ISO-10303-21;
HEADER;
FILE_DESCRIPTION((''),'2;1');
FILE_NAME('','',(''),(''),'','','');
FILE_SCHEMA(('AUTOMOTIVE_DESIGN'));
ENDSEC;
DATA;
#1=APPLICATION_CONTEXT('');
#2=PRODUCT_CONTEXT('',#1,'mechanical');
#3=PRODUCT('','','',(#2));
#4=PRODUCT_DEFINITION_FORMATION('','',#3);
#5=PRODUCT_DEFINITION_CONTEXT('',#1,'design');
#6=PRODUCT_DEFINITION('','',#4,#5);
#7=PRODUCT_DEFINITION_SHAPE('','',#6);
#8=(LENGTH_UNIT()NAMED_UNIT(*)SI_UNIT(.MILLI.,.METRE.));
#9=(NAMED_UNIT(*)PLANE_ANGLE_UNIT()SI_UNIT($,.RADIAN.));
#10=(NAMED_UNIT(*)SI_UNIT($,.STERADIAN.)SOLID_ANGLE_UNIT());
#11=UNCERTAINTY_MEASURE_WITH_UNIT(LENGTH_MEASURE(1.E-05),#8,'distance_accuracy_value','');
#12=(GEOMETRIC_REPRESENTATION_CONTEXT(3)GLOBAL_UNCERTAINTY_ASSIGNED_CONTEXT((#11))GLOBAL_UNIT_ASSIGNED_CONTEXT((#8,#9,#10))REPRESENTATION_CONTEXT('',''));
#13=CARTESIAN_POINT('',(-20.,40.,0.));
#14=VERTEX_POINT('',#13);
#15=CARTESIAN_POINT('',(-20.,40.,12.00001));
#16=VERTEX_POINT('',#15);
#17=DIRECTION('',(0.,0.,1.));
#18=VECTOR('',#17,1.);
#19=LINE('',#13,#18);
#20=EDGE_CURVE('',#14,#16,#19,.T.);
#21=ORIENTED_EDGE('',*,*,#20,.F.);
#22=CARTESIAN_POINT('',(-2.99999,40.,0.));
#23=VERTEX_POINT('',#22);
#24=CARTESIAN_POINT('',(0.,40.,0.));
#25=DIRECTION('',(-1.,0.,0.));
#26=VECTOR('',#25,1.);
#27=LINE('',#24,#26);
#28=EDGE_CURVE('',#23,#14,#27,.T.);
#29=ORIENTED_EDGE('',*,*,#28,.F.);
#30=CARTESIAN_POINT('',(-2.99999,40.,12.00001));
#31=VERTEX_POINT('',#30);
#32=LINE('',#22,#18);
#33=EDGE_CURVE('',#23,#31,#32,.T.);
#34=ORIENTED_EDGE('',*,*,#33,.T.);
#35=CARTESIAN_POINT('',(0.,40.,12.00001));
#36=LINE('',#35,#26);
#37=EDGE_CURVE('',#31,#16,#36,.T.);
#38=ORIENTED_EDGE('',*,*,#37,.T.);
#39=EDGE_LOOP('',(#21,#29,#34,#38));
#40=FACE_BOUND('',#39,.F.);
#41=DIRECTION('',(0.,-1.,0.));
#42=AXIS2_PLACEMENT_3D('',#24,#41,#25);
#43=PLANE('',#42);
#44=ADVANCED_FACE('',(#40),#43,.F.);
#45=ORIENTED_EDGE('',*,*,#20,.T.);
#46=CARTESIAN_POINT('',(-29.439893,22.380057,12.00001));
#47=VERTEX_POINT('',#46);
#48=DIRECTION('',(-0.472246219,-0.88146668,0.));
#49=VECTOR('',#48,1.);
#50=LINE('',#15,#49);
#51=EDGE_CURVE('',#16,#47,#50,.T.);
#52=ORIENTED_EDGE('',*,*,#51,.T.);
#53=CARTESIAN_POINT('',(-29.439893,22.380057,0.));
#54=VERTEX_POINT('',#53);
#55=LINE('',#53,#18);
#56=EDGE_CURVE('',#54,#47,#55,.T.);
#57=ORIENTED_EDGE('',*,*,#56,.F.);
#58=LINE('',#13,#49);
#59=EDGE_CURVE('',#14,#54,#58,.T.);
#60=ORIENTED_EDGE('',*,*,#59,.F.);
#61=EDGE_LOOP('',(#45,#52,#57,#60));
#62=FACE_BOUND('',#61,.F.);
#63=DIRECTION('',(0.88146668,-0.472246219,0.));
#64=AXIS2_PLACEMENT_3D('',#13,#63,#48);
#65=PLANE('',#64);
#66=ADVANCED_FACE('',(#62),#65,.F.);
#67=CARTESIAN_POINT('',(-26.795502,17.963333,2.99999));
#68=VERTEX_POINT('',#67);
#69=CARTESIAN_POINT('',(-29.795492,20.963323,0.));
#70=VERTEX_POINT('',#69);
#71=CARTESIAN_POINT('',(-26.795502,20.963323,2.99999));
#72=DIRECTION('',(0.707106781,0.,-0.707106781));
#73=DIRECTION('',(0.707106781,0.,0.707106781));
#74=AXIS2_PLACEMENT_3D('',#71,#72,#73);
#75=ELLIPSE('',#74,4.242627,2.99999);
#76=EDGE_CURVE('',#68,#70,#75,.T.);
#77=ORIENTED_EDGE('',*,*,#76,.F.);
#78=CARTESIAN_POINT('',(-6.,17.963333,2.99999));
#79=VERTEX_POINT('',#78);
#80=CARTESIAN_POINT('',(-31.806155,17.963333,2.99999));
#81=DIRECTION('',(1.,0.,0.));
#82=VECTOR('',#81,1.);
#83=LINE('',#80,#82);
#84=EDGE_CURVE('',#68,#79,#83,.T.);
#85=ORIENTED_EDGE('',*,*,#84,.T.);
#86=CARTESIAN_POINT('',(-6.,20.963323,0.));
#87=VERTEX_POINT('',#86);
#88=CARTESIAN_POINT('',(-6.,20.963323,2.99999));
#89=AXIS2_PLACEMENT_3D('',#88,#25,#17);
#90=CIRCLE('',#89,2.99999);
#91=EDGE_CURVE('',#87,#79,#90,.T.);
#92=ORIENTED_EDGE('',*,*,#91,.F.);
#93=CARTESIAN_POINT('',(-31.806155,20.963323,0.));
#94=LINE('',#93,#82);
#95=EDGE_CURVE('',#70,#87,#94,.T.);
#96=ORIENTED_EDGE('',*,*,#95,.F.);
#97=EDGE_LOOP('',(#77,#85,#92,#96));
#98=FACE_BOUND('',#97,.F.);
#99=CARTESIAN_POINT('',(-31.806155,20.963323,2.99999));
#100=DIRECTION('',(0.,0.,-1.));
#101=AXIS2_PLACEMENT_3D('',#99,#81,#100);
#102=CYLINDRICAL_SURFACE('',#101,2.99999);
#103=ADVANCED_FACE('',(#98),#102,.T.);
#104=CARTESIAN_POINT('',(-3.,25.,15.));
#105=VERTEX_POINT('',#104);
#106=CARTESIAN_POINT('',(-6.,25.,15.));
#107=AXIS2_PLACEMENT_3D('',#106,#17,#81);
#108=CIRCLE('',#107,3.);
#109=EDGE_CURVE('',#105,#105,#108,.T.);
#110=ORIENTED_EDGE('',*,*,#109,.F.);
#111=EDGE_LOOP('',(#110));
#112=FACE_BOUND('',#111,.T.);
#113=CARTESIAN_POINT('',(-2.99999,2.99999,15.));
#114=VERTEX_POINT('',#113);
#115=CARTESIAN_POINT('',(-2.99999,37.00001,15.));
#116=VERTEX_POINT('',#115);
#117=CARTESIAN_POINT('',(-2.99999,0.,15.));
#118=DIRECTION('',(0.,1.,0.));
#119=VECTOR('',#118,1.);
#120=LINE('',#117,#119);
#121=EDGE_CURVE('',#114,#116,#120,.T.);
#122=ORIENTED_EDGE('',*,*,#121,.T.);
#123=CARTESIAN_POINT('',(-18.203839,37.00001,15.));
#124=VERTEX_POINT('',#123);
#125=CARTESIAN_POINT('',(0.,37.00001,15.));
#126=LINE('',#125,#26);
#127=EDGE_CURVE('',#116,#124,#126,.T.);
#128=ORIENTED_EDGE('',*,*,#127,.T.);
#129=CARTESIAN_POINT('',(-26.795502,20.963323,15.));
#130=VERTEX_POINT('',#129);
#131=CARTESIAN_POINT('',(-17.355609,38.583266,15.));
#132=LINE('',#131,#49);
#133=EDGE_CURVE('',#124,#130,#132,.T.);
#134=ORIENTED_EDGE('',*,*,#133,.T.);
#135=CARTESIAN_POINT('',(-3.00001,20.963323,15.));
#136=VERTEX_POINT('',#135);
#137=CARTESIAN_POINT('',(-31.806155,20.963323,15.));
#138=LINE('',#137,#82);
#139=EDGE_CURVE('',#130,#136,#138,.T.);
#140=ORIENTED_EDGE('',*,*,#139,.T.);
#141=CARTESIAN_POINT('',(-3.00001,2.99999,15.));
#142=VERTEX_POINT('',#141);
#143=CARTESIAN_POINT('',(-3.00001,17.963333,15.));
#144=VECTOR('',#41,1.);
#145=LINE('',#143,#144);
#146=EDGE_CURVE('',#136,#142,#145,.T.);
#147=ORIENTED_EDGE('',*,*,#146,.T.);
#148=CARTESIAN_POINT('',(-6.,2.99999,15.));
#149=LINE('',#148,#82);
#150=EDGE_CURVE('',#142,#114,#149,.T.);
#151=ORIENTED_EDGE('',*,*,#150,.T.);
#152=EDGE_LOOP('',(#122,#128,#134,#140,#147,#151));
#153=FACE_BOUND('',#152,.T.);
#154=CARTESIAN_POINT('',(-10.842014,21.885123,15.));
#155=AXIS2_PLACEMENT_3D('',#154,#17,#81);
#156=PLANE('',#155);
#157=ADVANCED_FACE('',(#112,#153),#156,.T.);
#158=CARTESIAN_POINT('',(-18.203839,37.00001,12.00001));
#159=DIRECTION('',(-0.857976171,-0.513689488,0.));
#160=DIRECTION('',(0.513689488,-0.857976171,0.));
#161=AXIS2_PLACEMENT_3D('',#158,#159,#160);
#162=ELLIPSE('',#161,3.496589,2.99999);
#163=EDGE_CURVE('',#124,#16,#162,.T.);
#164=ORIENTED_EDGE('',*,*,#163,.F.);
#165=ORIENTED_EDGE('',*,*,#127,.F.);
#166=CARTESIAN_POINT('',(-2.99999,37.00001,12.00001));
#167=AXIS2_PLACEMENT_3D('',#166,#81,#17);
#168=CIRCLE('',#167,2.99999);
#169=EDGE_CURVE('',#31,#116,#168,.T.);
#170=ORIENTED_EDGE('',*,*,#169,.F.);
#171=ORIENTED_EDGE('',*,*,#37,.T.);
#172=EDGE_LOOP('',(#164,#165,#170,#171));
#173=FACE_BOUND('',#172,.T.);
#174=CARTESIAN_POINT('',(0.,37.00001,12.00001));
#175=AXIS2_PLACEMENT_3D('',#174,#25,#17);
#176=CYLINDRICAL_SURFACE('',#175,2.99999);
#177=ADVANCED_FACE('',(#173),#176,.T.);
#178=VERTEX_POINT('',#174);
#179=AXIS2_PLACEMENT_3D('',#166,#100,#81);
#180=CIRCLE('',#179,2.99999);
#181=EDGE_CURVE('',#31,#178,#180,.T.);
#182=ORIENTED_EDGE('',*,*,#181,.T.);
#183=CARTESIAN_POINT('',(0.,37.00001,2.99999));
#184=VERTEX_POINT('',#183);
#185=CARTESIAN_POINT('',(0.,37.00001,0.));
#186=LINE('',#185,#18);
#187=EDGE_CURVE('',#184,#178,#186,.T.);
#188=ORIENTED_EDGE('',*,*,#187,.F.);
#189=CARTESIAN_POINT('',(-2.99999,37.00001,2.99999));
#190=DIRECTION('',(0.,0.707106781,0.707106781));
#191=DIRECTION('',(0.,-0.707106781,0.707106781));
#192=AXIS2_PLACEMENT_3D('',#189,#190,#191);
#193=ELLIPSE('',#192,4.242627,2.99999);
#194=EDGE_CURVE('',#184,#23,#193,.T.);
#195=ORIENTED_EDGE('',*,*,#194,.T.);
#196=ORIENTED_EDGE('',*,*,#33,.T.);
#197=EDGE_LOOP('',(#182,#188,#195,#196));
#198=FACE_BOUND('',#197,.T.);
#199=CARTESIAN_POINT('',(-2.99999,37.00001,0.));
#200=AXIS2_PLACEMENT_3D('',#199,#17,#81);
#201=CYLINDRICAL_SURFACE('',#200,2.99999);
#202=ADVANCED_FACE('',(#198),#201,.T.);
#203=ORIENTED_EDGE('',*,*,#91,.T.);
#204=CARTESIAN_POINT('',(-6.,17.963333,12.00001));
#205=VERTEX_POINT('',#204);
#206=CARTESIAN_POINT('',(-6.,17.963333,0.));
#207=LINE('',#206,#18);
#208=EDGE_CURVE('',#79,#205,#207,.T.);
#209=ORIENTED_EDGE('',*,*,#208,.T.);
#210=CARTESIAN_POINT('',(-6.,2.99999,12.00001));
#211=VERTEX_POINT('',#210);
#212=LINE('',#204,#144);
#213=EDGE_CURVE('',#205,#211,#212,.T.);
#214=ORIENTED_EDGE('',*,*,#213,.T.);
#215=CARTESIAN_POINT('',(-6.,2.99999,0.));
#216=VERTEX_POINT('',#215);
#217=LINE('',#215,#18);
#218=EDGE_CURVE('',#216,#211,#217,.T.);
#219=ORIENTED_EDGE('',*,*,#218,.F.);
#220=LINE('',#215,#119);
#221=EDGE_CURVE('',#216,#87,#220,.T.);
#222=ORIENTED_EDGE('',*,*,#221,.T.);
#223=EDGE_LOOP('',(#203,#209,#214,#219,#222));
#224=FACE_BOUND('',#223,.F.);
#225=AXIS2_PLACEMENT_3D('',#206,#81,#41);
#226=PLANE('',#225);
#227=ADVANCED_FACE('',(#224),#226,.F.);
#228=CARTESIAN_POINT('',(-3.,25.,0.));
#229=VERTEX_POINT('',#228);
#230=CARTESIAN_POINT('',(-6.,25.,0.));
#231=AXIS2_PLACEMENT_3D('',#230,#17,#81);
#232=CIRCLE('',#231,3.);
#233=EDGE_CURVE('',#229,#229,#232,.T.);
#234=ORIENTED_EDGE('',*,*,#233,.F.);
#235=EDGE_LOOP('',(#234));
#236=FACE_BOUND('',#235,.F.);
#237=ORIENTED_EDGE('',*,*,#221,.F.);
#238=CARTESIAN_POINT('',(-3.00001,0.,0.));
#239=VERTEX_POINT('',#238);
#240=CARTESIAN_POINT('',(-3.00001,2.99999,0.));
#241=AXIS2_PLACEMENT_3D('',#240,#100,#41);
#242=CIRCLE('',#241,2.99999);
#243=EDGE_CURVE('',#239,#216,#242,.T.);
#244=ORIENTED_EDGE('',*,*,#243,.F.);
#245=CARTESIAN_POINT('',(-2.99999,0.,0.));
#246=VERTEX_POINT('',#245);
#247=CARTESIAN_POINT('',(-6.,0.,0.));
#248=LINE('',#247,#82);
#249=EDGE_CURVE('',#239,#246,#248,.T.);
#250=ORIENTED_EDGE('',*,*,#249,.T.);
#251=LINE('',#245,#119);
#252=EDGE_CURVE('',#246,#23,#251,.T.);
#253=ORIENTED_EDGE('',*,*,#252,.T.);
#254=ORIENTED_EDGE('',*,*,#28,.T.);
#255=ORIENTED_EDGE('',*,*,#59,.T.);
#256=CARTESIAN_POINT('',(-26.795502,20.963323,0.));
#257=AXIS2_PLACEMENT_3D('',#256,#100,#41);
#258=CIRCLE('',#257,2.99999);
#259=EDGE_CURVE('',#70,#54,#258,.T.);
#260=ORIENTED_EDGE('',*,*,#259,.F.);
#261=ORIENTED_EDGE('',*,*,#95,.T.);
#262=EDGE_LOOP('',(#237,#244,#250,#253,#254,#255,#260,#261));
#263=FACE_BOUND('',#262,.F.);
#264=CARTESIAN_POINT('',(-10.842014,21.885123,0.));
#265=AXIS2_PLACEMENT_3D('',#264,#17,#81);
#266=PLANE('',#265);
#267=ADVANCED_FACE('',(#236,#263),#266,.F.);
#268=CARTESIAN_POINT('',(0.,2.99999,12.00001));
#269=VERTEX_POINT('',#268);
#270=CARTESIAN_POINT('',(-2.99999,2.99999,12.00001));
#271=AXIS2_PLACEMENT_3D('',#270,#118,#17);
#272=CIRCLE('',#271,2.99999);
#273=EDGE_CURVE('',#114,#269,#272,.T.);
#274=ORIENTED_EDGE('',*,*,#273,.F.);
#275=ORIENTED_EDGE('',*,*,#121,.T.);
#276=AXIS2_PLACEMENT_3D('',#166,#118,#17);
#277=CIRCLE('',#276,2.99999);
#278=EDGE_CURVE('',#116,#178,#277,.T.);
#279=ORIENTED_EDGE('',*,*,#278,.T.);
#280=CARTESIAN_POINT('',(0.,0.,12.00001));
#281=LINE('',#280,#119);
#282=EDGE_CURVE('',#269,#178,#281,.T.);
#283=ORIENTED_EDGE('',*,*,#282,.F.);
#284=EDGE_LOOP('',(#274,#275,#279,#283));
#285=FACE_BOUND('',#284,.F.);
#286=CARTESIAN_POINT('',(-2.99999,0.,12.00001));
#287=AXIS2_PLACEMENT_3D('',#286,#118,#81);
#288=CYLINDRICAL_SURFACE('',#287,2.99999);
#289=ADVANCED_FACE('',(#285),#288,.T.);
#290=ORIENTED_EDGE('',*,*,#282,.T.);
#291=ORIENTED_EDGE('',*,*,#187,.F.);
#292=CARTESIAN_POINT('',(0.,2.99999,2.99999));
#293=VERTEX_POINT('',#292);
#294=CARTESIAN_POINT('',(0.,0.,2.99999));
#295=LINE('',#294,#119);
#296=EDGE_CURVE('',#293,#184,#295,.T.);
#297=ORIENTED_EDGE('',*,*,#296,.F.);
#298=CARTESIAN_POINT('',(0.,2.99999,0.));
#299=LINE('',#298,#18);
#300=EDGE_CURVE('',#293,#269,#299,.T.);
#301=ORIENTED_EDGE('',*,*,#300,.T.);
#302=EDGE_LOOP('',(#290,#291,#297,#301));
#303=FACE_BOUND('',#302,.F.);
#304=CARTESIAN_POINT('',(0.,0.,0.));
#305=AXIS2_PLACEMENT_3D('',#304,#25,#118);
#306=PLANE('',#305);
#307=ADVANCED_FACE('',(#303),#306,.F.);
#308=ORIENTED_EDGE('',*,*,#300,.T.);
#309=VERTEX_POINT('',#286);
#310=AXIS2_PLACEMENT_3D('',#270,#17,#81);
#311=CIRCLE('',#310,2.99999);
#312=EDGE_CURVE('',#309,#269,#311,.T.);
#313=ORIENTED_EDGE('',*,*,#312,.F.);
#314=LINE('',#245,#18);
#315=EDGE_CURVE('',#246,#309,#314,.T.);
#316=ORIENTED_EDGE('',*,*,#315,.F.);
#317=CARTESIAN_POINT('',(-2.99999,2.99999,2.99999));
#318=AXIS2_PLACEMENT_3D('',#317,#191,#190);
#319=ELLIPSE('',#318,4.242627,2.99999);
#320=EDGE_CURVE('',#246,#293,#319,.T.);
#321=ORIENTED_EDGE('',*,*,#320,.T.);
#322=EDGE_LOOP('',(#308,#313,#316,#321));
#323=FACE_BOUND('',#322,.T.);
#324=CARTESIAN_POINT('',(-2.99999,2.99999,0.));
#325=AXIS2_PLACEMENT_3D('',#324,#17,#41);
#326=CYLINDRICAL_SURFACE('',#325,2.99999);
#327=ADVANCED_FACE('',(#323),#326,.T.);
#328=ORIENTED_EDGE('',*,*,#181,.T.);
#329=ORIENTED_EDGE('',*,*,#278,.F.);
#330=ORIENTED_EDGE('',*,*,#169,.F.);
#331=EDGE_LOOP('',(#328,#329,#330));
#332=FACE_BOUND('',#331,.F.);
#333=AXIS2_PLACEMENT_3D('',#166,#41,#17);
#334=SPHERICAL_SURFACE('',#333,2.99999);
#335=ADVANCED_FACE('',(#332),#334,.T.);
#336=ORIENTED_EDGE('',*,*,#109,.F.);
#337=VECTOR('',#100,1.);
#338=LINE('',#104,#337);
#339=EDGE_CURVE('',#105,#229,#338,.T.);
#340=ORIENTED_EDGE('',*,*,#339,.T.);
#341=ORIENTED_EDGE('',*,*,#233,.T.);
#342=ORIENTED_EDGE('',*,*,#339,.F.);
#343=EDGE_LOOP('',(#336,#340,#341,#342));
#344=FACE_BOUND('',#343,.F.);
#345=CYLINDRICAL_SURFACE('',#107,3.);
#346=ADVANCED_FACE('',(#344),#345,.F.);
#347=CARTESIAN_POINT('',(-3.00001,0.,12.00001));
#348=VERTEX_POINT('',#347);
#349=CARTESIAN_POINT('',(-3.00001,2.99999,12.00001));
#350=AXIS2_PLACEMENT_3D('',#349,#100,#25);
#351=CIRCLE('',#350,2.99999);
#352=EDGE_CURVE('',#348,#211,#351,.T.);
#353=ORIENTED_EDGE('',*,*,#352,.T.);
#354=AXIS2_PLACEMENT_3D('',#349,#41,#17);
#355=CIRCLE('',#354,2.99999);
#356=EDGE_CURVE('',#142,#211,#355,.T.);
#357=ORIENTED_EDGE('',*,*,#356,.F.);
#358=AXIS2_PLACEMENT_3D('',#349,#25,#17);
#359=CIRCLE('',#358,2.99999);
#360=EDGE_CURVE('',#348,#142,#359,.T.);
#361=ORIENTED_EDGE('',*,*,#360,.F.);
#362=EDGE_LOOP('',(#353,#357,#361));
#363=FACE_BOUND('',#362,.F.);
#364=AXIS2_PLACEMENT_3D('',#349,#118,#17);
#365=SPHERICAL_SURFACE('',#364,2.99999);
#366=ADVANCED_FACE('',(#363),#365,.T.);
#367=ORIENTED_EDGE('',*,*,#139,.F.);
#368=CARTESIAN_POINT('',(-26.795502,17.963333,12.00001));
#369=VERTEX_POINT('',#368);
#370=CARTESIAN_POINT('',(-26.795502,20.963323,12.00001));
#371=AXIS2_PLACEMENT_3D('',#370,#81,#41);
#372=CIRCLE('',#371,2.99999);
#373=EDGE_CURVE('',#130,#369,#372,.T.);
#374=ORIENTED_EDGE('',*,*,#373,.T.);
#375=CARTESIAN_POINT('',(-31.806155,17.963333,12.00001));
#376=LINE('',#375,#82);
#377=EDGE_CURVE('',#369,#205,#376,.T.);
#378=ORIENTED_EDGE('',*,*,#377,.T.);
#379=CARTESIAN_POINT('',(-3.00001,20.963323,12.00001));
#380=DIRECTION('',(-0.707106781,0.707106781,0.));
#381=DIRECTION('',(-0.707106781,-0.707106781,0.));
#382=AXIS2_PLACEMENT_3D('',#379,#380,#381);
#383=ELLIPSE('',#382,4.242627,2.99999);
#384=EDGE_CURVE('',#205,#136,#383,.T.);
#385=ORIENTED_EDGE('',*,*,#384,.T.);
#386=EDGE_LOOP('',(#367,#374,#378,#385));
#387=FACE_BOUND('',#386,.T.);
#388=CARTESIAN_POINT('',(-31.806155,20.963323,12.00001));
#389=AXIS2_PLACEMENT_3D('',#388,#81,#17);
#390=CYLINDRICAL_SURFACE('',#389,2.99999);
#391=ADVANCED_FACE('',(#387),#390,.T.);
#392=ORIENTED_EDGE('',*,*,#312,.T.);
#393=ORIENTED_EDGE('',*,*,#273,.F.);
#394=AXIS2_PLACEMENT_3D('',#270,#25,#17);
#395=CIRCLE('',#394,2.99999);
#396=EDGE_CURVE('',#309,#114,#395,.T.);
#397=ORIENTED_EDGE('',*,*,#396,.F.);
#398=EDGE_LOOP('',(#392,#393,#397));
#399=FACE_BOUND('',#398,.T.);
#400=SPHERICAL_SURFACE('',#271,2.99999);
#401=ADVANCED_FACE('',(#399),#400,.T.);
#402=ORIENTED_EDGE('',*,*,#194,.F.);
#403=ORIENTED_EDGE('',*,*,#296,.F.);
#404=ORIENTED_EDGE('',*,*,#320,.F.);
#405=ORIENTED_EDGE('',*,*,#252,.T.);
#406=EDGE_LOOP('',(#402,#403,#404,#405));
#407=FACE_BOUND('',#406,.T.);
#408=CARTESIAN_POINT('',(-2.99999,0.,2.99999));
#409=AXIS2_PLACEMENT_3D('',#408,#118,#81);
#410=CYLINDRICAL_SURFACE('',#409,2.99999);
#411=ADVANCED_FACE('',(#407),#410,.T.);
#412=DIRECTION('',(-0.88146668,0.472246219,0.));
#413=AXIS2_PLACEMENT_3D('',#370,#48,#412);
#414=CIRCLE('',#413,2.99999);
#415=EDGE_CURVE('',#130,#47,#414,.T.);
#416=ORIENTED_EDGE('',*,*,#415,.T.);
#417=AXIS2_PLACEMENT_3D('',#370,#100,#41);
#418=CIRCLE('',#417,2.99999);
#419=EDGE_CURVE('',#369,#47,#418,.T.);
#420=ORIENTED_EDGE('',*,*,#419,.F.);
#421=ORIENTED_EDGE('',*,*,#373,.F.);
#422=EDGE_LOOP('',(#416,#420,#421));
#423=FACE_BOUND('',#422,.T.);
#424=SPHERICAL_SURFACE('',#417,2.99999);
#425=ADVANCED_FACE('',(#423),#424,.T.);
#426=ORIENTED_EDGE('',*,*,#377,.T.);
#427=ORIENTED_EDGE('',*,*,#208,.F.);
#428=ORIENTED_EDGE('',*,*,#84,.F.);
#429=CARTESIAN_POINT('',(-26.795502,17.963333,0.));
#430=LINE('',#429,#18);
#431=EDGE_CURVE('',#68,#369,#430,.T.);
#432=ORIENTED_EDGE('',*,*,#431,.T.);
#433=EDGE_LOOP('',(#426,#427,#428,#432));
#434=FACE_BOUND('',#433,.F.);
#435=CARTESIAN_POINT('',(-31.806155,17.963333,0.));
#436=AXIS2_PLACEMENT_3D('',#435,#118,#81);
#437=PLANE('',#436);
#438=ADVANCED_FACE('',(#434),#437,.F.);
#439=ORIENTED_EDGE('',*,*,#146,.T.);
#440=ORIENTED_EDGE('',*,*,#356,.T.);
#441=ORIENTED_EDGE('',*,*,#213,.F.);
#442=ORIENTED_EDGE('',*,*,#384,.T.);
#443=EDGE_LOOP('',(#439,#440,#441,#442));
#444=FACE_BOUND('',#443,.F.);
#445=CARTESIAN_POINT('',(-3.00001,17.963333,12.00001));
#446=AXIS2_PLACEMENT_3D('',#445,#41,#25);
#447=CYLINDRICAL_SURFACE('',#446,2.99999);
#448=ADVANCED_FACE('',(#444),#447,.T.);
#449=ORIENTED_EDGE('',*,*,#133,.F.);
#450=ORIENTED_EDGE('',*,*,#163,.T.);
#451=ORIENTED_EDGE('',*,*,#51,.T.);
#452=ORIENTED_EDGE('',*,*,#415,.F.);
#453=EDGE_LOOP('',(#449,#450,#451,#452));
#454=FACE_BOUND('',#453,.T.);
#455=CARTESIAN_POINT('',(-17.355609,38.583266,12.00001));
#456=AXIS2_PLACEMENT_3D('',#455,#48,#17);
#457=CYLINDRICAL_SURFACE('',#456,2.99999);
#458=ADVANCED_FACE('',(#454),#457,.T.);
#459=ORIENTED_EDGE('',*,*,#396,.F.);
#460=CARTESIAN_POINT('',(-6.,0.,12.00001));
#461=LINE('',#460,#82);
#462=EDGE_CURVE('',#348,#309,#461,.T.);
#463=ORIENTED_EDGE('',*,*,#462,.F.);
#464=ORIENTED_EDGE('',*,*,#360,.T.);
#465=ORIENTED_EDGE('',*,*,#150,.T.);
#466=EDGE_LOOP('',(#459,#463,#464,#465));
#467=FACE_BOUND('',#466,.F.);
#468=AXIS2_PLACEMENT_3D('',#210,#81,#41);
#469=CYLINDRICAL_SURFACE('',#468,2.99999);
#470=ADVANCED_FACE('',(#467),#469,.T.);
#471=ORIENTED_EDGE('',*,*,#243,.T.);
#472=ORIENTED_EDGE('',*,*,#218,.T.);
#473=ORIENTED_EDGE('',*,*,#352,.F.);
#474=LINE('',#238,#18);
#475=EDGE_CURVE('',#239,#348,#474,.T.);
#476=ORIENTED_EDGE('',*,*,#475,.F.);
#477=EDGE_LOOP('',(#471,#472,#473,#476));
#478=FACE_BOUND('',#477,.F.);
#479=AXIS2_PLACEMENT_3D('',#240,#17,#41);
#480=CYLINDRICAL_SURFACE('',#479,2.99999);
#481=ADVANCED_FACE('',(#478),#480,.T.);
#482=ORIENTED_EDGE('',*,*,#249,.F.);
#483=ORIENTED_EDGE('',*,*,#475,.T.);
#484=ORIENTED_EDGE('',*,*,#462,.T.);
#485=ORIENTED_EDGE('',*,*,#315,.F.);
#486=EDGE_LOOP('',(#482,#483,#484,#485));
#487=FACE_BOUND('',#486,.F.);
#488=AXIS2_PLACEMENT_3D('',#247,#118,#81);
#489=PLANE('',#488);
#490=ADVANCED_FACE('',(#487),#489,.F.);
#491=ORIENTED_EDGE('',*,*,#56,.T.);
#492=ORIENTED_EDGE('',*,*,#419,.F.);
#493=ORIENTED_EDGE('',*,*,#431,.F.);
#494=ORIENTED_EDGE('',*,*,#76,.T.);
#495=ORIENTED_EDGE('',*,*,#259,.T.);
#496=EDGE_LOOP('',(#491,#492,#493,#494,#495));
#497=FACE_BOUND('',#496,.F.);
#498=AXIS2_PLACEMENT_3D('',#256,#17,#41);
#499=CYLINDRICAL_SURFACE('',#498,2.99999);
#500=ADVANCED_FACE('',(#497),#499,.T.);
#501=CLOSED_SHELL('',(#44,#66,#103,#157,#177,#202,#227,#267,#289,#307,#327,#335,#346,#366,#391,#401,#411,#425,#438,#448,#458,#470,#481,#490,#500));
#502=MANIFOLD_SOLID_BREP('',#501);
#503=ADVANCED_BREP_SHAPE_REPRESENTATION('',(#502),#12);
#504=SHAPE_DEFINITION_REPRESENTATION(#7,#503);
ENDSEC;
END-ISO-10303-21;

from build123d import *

# Parameters (mm, degrees)
F1_DEPTH = 15
F2_R     = 3
F3_DEPTH = 25
F4_R     = 2.99999


# Not quite as in the source:
# - a fillet or chamfer is up to 0.001 mm smaller than in the source, because OpenCascade refuses the exact size


with BuildPart() as f1:
    # F0 (on Top) → F1 (new body)
    with BuildSketch(Plane.XY):
        Polygon((-6, 0), (0, 0), (0, 40), (-20, 40), (-31.8061554718, 17.9633329885), (-6, 17.9633329885), align=None)
    extrude(amount=F1_DEPTH)

    # F2 (on face) → F3 (cut)
    with BuildSketch(Plane.XY.offset(15)):
        with Locations((-6, 25)):
            Circle(F2_R)
    extrude(amount=-F3_DEPTH, mode=Mode.SUBTRACT)

    # F4 (radius 3 in the source; OpenCascade refuses exactly that, so slightly less here)
    f4_edges = [f1.edges().sort_by_distance(p)[0] for p in [
        (0, 20, 15),
        (-6, 8.981666, 15),
        (-18.903078, 17.963333, 15),
        (-25.903078, 28.981666, 15),
        (-10, 40, 15),
        (0, 40, 7.5),
        (-3, 0, 15),
        (0, 0, 7.5),
        (0, 20, 0),
        (-18.903078, 17.963333, 0),
        (-31.806155, 17.963333, 7.5),
        (-6, 0, 7.5),
    ]]
    fillet(f4_edges, radius=F4_R)


solid = f1.part
